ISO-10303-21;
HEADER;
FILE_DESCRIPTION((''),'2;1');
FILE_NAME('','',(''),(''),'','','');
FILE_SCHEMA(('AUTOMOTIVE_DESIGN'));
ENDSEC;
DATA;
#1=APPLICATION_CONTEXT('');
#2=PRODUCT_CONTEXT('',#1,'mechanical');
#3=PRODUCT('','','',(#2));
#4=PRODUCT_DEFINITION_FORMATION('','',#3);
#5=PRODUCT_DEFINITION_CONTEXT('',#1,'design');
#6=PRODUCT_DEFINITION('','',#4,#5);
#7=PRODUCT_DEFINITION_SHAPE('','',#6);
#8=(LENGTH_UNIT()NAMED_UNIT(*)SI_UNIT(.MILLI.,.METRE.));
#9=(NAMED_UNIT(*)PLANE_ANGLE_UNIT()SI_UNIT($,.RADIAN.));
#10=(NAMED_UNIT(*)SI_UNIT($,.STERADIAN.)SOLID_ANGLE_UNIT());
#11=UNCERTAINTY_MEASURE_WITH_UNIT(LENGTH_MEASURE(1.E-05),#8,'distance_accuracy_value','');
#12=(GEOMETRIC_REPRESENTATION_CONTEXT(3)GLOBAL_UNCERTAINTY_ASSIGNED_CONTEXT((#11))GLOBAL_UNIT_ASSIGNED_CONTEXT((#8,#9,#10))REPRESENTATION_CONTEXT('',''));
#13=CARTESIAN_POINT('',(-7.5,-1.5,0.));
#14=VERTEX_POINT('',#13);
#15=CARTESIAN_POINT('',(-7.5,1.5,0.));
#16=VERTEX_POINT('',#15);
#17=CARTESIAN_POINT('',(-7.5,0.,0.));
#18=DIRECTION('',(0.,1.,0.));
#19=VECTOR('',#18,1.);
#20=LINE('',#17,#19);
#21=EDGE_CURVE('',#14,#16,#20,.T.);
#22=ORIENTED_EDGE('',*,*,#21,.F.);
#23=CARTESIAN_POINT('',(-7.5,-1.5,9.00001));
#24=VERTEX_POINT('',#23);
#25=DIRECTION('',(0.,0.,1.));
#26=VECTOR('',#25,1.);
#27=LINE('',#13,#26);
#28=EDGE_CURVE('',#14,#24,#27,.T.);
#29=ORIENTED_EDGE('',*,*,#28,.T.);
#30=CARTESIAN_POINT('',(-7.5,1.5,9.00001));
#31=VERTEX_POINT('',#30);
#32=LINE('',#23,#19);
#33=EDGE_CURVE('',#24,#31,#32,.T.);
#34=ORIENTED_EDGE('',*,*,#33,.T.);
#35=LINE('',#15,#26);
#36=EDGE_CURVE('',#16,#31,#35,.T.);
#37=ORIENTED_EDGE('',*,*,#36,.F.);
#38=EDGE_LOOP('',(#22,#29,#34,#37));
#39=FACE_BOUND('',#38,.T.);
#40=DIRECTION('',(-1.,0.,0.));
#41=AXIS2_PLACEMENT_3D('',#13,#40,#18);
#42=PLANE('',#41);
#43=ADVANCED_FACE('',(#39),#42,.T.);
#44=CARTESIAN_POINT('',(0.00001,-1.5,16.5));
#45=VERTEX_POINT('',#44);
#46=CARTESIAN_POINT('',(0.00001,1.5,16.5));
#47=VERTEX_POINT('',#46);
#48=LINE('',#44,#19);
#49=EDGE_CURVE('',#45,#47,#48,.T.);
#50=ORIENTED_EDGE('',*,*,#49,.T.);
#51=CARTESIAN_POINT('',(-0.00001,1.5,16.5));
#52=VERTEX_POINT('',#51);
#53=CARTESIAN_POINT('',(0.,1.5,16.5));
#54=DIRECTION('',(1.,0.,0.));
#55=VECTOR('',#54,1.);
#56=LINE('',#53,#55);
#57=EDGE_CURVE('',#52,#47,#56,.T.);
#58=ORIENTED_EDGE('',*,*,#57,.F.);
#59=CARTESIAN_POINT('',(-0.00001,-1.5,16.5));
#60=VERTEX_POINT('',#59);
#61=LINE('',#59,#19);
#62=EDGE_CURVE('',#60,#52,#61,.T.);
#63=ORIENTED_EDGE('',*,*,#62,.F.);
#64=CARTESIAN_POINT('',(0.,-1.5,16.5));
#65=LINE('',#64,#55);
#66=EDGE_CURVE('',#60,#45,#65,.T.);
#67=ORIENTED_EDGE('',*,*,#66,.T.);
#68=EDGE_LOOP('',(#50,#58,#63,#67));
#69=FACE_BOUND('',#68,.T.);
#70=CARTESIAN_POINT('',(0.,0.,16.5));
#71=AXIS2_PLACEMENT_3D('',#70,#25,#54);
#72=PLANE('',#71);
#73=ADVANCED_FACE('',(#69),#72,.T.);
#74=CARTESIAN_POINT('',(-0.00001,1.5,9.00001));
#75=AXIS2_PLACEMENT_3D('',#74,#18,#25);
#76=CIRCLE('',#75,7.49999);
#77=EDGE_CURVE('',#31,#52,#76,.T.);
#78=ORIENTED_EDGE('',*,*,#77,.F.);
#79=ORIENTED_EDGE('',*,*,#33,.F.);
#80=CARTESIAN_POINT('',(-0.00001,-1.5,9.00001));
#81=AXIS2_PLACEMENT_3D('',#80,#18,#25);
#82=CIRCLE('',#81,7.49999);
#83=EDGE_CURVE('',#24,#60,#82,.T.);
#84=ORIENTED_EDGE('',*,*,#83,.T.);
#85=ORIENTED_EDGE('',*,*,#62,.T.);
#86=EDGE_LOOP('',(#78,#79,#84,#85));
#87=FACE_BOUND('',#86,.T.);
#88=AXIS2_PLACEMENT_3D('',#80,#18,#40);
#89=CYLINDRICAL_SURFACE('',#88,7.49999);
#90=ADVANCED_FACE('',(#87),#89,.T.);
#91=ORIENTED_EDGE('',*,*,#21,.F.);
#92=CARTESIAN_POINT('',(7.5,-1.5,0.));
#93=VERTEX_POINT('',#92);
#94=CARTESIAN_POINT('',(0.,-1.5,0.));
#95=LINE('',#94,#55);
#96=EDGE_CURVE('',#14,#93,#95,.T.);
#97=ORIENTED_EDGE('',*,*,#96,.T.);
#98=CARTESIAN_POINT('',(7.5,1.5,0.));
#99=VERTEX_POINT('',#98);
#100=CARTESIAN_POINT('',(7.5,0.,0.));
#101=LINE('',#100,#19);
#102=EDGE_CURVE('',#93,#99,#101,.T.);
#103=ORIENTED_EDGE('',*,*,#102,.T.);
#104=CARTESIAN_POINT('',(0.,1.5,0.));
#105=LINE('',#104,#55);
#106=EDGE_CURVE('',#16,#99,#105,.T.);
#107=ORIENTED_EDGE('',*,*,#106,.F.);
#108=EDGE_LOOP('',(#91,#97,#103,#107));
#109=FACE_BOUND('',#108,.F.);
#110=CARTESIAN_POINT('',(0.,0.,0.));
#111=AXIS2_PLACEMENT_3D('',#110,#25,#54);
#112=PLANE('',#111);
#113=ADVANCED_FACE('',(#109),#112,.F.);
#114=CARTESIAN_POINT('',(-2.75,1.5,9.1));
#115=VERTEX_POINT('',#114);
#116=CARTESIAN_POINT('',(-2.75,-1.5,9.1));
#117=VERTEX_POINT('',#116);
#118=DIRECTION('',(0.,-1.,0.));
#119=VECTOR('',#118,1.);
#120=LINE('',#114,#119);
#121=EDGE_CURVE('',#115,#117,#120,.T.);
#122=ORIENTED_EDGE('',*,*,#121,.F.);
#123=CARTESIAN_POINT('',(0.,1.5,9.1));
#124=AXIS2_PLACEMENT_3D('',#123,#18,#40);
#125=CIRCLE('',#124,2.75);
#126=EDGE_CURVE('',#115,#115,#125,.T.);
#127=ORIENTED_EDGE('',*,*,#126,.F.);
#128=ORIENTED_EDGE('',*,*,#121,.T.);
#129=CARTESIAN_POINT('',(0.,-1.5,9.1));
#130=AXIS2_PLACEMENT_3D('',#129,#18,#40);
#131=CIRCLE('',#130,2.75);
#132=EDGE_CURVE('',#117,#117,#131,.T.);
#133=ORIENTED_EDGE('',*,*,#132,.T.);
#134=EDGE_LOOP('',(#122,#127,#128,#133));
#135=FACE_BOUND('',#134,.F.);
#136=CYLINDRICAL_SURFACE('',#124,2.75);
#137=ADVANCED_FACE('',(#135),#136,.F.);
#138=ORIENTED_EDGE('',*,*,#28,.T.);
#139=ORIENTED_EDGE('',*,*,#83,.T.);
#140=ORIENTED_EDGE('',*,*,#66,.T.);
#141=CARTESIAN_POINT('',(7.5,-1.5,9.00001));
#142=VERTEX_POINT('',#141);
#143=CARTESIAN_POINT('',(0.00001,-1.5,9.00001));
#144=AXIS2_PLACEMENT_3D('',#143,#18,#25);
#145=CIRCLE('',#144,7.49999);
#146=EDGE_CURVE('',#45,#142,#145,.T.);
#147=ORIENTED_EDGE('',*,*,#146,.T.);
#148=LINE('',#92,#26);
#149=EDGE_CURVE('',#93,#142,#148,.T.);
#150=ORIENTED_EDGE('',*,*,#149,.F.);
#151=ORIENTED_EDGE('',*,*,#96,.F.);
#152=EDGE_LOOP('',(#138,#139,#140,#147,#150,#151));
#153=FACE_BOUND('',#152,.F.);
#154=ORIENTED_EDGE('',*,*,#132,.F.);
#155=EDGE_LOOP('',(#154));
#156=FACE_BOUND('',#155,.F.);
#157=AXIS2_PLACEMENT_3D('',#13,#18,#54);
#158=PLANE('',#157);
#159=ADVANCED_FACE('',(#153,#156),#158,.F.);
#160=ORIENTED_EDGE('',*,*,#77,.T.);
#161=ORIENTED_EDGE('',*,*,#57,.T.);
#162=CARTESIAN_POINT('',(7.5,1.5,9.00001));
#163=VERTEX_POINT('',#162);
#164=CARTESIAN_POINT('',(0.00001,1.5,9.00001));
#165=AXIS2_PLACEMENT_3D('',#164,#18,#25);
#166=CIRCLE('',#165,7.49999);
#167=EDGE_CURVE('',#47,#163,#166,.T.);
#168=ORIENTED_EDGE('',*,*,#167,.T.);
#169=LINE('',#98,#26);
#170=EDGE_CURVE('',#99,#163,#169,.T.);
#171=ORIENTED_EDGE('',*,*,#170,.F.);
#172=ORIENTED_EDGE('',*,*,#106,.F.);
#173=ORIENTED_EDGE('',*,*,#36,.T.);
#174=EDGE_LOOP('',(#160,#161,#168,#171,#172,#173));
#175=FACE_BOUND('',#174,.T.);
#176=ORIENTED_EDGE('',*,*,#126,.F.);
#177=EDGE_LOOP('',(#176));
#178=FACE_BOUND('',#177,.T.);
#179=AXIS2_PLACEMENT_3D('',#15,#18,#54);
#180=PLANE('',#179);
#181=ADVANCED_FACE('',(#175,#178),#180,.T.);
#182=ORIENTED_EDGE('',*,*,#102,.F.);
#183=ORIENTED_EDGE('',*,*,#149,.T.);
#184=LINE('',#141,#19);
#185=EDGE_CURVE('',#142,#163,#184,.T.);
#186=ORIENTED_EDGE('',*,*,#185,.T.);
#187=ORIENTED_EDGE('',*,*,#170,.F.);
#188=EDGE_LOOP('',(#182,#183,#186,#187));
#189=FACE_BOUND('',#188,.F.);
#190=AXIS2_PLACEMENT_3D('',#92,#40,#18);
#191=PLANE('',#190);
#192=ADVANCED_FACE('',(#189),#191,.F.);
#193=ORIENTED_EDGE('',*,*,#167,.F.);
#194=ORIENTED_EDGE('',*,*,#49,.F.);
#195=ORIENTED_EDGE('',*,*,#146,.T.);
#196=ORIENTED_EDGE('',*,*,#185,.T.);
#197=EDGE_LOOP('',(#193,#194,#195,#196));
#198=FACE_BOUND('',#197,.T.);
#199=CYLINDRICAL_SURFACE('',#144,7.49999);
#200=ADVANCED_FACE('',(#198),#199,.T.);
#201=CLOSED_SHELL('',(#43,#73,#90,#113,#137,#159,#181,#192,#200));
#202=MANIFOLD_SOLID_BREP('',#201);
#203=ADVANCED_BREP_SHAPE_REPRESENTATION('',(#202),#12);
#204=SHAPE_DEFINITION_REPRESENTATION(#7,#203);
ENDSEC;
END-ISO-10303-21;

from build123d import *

# Parameters (mm, degrees)
F0_W     = 15
F0_H     = 3
F1_DEPTH = 16.5
F2_R     = 2.75
F3_DEPTH = 25
F4_R     = 7.49999


# Not quite as in the source:
# - a fillet or chamfer is up to 0.001 mm smaller than in the source, because OpenCascade refuses the exact size


with BuildPart() as f1:
    # F0 (on Top) → F1 (new body)
    with BuildSketch(Plane.XY):
        Rectangle(F0_W, F0_H)
    extrude(amount=F1_DEPTH)

    # F2 (on face) → F3 (cut)
    with BuildSketch(Plane(origin=(0, 1.5, 0), x_dir=(-1, 0, 0), z_dir=(0, 1, 0))):
        with Locations((0, 9.1)):
            Circle(F2_R)
    extrude(amount=-F3_DEPTH, mode=Mode.SUBTRACT)

    # F4 (radius 7.5 in the source; OpenCascade refuses exactly that, so slightly less here)
    f4_edges = [f1.edges().sort_by_distance(p)[0] for p in [
        (-7.5, 0, 16.5),
        (7.5, 0, 16.5),
    ]]
    fillet(f4_edges, radius=F4_R)


solid = f1.part
